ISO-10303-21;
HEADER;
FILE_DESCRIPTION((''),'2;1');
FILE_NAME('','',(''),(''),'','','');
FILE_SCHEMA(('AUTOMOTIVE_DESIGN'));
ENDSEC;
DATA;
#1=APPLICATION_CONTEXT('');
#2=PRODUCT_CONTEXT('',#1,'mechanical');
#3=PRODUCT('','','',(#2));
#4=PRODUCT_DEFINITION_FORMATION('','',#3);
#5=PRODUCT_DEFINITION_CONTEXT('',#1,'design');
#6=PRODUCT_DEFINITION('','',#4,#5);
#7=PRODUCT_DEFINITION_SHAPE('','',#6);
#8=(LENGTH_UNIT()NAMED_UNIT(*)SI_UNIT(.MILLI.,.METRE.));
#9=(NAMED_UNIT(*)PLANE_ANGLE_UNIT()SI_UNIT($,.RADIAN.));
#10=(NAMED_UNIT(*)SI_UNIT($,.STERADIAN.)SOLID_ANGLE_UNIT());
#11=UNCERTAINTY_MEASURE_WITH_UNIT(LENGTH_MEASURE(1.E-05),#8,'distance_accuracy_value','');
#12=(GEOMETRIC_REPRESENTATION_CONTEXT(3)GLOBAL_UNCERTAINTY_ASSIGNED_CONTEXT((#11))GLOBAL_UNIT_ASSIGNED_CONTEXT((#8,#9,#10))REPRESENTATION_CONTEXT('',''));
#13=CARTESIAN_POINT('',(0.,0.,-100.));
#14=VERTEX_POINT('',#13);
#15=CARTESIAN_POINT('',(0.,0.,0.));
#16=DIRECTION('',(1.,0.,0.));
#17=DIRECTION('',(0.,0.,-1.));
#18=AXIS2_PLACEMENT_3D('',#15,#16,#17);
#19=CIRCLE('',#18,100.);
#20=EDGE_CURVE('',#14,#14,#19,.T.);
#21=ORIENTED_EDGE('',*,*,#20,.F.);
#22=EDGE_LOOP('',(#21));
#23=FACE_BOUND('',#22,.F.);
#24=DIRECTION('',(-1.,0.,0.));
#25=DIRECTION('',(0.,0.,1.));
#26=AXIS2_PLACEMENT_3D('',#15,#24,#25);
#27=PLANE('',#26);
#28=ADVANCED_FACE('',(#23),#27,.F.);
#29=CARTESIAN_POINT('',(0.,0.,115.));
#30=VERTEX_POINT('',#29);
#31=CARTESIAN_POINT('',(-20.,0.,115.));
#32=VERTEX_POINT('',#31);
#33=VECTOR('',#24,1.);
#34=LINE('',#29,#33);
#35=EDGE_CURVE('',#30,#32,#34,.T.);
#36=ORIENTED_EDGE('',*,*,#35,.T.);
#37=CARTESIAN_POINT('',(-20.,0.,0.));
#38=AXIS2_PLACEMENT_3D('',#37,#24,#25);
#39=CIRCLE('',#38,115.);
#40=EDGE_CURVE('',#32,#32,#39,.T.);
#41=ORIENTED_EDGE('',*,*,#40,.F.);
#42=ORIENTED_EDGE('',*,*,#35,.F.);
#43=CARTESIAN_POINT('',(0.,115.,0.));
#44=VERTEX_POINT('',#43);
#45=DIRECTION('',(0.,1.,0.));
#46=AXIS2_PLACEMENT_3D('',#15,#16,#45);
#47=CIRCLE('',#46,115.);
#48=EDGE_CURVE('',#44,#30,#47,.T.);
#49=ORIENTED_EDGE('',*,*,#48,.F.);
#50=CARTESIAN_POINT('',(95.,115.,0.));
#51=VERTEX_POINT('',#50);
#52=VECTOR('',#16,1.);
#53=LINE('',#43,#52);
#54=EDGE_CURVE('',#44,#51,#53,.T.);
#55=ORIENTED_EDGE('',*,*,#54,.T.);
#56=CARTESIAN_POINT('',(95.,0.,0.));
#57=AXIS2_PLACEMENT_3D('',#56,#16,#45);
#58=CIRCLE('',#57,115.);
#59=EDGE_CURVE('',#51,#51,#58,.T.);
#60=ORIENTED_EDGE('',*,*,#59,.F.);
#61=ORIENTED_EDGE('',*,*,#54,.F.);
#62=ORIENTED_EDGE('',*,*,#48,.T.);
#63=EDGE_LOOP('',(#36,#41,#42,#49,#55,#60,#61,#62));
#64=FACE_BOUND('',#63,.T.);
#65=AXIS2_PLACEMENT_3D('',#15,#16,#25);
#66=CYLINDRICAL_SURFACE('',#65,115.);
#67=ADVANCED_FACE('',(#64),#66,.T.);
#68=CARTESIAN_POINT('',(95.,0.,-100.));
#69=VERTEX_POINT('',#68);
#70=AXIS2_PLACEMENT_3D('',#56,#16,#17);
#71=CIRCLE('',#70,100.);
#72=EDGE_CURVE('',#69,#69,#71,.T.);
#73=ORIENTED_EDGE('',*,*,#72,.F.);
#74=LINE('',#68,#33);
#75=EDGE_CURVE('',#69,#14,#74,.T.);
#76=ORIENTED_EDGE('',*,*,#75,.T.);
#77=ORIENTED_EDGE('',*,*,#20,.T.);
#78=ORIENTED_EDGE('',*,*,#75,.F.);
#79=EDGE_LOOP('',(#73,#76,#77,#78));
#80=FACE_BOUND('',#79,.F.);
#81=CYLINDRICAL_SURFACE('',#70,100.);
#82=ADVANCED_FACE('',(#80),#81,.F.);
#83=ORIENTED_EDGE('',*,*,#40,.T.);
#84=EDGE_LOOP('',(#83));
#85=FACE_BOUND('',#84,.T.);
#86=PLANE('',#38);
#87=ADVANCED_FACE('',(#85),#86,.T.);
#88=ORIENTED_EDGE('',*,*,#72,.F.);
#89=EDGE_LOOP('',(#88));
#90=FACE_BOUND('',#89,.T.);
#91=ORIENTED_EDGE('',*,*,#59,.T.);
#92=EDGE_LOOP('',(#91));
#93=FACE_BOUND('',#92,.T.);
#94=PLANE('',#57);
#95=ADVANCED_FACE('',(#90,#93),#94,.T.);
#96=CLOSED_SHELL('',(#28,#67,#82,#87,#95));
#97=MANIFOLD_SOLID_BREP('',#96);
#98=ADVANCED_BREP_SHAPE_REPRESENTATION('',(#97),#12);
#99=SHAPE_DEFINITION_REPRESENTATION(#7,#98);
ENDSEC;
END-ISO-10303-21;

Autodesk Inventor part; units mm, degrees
ref_plane "YZ Plane" through (0, 0, 0) normal (1, 0, 0) x (0, 1, 0)
ref_plane "XZ Plane" through (0, 0, 0) normal (0, 1, 0) x (-1, 0, 0)
ref_plane "XY Plane" through (0, 0, 0) normal (0, 0, 1) x (1, 0, 0)
sketch "Esquisse1" plane through (0, 0, 0) normal (1, 0, 0) x (0, 1, 0)
  circle A0 centre (0, 0) radius 115
  dimension "d0" = 230
extrude "Extrusion1" add sketch "Esquisse1" along normal blind 95
sketch "Esquisse2" plane through (95, 0, 0) normal (1, 0, 0) x (0, 0, -1)
  circle A0 centre (0, 0) radius 100
  dimension "d3" = 200
extrude "Extrusion2" cut sketch "Esquisse2" against normal blind 95
sketch "Esquisse3" plane through (0, 0, 0) normal (-1, 0, 0) x (0, 0, 1)
  circle A0 centre (0, 0) radius 115
  dimension "d6" = 230
extrude "Extrusion3" add sketch "Esquisse3" along normal blind 20
